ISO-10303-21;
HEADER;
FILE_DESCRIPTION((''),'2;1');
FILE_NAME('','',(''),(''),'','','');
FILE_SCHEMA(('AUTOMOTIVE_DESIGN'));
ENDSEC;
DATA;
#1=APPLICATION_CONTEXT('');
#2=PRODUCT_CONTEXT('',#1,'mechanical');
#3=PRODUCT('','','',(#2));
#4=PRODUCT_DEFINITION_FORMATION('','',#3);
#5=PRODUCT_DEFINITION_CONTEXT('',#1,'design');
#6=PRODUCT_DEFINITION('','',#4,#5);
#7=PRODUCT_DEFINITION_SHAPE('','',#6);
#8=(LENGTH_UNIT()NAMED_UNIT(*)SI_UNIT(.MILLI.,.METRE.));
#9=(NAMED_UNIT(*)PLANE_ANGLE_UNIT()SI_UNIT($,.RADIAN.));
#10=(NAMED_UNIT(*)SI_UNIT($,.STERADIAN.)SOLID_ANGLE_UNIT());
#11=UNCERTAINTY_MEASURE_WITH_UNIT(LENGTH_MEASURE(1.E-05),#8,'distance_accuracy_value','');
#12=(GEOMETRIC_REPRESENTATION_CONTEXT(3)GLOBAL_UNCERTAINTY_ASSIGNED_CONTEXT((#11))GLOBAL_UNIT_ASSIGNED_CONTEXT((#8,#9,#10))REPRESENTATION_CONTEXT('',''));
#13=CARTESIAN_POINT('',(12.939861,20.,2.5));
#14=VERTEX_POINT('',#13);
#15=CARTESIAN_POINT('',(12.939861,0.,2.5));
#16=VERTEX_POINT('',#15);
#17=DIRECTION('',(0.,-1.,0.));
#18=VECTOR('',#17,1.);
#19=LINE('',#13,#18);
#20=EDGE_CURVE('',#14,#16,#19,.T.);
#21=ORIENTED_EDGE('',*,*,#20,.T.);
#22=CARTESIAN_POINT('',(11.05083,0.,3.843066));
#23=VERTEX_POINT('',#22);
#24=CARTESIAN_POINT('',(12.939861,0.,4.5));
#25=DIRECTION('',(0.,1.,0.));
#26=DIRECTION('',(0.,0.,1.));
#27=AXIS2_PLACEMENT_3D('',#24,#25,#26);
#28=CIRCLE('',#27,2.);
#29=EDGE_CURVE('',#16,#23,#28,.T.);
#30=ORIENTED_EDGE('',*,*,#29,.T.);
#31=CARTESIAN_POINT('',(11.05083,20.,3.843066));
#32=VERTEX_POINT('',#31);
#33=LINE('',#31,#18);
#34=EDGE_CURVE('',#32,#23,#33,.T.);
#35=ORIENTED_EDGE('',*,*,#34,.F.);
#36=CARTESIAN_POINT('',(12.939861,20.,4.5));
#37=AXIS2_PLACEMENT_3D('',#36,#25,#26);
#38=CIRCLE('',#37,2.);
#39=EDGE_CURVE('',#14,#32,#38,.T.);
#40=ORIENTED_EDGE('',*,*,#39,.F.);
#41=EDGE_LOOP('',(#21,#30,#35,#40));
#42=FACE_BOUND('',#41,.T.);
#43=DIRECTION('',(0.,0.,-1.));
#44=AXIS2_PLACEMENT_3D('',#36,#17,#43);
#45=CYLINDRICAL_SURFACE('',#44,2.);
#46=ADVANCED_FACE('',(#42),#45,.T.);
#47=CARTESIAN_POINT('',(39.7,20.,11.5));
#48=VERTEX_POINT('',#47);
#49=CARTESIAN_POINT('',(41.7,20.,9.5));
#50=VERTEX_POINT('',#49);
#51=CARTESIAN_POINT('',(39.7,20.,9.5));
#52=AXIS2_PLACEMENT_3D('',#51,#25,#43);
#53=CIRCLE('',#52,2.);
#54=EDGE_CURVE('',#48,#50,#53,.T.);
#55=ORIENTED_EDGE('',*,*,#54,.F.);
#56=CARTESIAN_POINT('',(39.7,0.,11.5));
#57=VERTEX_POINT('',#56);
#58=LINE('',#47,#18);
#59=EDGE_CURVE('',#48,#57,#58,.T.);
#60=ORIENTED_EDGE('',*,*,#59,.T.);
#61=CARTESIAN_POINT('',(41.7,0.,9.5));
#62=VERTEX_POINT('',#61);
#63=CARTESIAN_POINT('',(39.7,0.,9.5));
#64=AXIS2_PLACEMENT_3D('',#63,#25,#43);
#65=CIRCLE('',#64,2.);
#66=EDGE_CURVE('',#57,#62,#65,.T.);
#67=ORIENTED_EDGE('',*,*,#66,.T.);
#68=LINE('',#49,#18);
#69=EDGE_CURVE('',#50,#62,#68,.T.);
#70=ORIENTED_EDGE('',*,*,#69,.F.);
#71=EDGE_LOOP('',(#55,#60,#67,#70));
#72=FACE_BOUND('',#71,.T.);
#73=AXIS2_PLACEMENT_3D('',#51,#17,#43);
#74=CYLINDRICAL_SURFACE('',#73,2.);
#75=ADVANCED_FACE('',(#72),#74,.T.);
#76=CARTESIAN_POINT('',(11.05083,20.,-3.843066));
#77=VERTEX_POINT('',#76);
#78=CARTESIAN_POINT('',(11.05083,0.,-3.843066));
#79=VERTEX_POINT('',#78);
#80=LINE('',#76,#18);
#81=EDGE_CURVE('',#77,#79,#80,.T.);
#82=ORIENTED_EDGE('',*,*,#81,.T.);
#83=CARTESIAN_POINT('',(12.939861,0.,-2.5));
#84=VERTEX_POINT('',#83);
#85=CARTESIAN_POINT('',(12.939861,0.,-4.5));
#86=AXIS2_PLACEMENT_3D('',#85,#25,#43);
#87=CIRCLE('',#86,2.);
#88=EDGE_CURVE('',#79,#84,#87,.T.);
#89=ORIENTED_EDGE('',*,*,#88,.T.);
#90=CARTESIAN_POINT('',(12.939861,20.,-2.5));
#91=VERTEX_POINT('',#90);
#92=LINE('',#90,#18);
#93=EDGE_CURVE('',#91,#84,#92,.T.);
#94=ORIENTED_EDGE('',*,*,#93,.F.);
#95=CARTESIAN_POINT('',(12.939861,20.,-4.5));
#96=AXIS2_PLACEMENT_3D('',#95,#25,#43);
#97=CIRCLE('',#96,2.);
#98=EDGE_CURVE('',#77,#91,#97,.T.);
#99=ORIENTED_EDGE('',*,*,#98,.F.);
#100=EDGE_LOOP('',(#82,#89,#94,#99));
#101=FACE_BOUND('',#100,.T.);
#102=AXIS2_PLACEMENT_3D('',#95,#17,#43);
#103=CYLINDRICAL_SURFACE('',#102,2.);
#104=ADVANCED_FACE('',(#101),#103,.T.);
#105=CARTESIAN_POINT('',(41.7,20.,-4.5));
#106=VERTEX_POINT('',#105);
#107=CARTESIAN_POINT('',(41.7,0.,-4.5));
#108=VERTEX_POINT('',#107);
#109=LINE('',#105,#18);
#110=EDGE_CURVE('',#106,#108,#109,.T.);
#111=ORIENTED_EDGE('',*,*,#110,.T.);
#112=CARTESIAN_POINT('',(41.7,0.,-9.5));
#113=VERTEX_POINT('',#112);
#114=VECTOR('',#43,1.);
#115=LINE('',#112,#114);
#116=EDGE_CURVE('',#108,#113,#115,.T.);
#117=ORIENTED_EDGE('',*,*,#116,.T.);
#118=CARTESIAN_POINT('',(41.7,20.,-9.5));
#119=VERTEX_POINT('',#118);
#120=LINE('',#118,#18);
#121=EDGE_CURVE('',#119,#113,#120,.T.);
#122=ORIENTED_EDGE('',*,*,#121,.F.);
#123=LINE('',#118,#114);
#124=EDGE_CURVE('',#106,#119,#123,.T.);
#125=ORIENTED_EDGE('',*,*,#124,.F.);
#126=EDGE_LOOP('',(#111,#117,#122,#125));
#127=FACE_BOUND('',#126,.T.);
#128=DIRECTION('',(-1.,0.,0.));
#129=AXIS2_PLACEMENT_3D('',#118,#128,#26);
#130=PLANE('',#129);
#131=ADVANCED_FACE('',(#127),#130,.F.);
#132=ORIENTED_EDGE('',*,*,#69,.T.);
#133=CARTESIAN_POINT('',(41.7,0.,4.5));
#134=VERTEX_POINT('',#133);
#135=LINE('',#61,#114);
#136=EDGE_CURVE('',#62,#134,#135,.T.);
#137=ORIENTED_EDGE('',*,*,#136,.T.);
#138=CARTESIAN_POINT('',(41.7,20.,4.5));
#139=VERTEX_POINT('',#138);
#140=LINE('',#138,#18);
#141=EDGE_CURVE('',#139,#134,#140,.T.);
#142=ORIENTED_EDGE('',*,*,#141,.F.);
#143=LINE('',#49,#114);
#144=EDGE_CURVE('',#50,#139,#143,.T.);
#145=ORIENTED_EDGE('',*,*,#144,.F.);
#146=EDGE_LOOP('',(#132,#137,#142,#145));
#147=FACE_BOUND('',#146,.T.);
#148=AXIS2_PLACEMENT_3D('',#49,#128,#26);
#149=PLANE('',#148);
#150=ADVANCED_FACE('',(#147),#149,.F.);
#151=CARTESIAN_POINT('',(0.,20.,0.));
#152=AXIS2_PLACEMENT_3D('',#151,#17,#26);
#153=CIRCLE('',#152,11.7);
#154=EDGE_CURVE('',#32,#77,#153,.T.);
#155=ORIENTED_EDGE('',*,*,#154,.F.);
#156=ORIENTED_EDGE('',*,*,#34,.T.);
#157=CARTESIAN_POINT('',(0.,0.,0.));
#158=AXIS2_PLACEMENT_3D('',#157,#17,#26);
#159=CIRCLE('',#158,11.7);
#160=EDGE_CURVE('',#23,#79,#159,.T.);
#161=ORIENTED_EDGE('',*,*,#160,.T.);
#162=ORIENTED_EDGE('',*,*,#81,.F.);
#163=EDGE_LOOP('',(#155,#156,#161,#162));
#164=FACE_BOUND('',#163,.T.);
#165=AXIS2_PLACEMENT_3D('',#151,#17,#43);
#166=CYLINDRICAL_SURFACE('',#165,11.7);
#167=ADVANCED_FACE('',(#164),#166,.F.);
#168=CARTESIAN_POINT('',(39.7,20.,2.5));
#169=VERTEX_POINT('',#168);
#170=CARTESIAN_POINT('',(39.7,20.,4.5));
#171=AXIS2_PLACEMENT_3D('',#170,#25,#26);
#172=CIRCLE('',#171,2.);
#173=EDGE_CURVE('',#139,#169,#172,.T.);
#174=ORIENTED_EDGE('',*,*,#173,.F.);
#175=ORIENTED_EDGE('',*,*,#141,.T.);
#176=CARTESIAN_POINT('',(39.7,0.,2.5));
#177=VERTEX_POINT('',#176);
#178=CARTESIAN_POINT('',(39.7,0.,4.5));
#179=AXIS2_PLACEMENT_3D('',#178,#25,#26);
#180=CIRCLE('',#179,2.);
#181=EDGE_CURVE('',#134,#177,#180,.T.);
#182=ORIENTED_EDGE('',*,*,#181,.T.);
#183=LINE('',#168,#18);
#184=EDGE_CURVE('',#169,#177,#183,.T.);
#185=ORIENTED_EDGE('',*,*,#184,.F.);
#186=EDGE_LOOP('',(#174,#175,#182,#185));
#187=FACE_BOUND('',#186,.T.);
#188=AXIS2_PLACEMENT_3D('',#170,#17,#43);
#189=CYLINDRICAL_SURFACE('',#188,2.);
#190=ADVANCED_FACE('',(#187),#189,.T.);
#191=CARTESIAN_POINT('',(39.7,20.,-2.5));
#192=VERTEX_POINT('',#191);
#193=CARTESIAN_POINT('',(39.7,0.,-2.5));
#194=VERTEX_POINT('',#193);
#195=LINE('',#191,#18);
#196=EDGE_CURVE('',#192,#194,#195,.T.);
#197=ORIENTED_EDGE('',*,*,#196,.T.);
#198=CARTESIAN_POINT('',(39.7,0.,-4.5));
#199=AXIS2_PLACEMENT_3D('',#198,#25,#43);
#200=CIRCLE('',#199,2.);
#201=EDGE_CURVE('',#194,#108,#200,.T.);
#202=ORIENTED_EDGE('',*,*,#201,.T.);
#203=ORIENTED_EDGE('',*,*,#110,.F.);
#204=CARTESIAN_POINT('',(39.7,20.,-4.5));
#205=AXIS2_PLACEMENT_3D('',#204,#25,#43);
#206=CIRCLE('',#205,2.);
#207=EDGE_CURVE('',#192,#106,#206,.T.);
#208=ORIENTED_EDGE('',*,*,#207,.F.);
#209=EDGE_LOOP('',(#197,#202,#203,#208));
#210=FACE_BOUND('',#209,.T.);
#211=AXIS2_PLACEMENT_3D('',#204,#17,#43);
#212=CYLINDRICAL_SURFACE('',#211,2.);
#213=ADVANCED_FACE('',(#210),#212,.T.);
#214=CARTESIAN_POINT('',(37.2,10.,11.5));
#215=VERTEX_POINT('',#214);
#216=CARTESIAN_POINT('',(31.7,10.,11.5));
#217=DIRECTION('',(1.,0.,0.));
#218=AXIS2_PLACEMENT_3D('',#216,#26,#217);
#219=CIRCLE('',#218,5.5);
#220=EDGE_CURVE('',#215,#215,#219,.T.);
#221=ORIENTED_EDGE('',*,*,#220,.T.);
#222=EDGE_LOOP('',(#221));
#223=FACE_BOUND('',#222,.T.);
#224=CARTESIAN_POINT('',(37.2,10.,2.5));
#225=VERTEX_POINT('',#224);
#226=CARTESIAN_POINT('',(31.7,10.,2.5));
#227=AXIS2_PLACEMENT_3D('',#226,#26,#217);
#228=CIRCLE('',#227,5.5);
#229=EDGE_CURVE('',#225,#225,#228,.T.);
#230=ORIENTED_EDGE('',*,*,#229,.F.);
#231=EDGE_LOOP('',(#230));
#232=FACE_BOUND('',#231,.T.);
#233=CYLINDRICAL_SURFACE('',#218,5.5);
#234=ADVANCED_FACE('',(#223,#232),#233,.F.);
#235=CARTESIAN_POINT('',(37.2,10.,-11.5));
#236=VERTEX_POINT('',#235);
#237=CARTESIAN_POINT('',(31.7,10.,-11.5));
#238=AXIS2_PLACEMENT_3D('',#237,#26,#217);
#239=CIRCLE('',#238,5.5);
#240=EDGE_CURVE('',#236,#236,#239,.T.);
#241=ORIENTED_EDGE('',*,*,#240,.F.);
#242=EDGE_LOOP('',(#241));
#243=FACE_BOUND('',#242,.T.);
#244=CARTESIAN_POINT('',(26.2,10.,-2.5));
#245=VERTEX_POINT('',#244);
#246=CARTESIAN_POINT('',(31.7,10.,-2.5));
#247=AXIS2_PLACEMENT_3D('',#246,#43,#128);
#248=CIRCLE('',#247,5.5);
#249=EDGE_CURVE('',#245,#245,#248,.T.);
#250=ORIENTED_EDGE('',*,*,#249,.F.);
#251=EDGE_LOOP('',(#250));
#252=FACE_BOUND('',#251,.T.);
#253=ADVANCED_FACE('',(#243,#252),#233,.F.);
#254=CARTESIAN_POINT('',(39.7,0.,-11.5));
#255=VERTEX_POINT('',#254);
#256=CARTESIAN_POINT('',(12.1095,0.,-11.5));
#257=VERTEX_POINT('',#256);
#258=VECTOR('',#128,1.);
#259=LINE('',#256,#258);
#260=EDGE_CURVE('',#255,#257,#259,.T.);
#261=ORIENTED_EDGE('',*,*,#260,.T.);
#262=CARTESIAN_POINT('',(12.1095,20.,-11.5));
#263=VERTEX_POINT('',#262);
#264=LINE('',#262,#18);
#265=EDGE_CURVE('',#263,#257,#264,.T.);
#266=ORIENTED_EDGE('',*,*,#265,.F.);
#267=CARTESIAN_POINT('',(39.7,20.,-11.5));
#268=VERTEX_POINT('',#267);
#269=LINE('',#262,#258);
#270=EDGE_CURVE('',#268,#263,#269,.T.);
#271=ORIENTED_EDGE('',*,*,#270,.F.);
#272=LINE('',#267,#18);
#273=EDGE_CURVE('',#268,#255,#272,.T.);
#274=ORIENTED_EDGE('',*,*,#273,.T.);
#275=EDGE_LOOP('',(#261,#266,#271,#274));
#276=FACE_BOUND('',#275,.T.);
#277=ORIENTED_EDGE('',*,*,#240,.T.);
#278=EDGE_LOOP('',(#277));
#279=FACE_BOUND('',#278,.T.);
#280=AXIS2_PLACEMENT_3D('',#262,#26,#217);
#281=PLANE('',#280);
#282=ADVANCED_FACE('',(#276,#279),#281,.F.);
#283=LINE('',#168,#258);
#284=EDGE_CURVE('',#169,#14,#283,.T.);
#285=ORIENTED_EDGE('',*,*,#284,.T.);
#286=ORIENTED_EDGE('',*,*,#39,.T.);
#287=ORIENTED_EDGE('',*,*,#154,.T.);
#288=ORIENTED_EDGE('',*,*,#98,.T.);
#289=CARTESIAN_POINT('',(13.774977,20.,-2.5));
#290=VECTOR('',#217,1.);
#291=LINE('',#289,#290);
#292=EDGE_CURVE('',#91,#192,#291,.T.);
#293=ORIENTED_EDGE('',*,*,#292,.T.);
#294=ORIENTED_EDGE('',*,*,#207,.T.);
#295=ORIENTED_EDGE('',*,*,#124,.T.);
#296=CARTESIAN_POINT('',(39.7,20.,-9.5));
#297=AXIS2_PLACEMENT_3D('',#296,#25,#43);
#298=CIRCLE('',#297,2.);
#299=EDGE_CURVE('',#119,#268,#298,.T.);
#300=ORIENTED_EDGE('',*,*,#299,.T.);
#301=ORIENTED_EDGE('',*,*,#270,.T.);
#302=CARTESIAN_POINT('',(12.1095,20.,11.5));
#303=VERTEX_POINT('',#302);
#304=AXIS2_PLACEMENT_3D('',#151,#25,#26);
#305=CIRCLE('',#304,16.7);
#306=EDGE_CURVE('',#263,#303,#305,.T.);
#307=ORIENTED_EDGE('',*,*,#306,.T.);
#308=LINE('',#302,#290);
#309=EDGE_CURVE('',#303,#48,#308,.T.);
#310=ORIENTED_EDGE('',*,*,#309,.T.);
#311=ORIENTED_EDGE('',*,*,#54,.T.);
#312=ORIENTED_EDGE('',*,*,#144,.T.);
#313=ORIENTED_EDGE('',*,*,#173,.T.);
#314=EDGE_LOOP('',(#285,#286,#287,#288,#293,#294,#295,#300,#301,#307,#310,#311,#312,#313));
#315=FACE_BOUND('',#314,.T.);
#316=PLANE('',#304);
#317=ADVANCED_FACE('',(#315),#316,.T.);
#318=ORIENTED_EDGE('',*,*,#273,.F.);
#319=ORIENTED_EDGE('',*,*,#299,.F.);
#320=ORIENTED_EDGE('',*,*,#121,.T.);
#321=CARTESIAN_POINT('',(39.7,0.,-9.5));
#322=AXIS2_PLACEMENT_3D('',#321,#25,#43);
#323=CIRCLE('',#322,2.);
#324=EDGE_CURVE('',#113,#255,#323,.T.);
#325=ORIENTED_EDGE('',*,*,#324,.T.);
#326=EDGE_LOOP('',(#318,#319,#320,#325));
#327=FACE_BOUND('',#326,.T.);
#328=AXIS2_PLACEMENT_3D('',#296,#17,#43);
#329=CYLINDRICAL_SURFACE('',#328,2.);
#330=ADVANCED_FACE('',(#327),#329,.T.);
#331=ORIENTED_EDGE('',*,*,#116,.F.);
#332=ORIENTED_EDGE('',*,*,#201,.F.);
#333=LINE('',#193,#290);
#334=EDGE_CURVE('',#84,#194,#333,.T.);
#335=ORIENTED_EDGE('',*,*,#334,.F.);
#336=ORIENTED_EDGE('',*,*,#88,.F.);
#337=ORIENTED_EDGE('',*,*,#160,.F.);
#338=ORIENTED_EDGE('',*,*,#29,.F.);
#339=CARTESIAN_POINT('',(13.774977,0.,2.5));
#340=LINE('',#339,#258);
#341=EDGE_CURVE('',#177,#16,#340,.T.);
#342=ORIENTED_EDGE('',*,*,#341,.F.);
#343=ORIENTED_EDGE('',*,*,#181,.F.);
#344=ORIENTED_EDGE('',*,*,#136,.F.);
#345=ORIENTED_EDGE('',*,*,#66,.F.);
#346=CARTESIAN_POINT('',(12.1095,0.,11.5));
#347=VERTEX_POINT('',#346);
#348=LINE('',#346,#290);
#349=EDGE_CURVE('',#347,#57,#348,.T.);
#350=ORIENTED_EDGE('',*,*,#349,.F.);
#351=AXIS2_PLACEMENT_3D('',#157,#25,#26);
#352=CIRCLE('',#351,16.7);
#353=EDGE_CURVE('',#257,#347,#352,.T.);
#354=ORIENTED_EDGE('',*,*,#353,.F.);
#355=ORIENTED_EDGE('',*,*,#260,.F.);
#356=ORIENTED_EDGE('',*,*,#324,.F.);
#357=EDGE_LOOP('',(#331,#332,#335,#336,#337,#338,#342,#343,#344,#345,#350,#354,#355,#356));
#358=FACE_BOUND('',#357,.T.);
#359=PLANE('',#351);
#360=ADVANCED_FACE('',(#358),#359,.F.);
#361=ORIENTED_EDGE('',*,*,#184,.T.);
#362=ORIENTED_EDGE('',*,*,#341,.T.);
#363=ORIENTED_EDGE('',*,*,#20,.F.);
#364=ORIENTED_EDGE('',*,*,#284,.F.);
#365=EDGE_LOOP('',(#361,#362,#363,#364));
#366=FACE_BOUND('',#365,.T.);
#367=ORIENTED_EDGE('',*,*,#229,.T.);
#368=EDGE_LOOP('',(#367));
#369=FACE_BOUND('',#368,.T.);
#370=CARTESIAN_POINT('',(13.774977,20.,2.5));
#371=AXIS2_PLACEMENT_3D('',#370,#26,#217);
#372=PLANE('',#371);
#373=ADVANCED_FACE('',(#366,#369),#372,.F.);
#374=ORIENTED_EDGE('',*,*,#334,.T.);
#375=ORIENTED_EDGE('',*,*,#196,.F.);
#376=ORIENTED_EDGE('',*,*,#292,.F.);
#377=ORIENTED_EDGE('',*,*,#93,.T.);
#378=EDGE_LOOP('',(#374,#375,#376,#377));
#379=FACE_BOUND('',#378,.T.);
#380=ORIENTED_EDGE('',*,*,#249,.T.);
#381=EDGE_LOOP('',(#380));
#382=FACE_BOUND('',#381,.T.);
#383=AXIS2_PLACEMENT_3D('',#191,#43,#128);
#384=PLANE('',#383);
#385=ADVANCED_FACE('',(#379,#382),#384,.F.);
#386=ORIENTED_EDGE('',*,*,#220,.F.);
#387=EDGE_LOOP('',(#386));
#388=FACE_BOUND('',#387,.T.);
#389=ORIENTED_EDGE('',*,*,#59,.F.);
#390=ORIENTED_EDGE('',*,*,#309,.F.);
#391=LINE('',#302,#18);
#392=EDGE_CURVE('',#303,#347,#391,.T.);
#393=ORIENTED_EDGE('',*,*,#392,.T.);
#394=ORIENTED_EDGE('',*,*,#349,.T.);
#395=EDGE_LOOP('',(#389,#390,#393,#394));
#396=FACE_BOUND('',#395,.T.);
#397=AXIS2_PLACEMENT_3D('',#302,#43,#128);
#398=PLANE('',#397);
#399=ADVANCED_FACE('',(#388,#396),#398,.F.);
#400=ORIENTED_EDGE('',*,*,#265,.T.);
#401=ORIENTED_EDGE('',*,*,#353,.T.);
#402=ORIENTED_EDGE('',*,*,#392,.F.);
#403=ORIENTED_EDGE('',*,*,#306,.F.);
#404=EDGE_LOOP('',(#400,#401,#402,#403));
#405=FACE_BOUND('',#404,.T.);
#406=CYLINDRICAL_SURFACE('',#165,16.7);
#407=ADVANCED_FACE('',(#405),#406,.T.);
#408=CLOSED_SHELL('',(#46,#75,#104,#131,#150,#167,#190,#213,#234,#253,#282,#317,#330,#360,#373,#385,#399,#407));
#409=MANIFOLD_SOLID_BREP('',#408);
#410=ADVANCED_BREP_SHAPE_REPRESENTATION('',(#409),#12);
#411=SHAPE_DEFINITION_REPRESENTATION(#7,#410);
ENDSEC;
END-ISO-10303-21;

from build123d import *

# Parameters (mm, degrees)
DODANIE_WYCI_GNI_CIE1_DEPTH  = 20
ZAAWANSOWANYOTW_R1_START     = -11.5
ZAAWANSOWANYOTW_R1_OUTLINE_R = 5.5
ZAAWANSOWANYOTW_R1_DEPTH     = 23


# Read off the part's stored shape, not the designer's step: ZaawansowanyOtwór1
with BuildPart() as part:
    # Szkic1 → Dodanie-wyciągnięcie1 (new body)
    with BuildSketch(Plane(origin=(0, 0, 0), x_dir=(1, 0, 0), z_dir=(0, 1, 0))):
        with BuildLine():
            Line((12.109500403, 11.5), (39.7, 11.5))
            ThreePointArc((39.7, 11.5), (41.114213562, 10.914213562), (41.7, 9.5))
            Line((41.7, 9.5), (41.7, 4.5))
            ThreePointArc((41.7, 4.5), (41.114213562, 3.085786438), (39.7, 2.5))
            Line((39.7, 2.5), (13.774977314, 2.5))
            Line((13.774977314, 2.5), (12.939860896, 2.5))
            ThreePointArc((12.939860896, 2.5), (11.780953784, 2.869989477), (11.050830108, 3.843065693))
            ThreePointArc((11.050830108, 3.843065693), (-11.7, 0), (11.050830108, -3.843065693))
            ThreePointArc((11.050830108, -3.843065693), (11.780953784, -2.869989477), (12.939860896, -2.5))
            Line((12.939860896, -2.5), (13.774977314, -2.5))
            Line((13.774977314, -2.5), (39.7, -2.5))
            ThreePointArc((39.7, -2.5), (41.114213562, -3.085786438), (41.7, -4.5))
            Line((41.7, -4.5), (41.7, -9.5))
            ThreePointArc((41.7, -9.5), (41.114213562, -10.914213562), (39.7, -11.5))
            Line((39.7, -11.5), (12.109500403, -11.5))
            ThreePointArc((12.109500403, -11.5), (-16.7, 0), (12.109500403, 11.5))
        make_face()
    extrude(amount=DODANIE_WYCI_GNI_CIE1_DEPTH)

    # ZaawansowanyOtwór1 outline → ZaawansowanyOtwór1 (cut)
    with BuildSketch(Plane.XY.offset(ZAAWANSOWANYOTW_R1_START)):
        with Locations((31.7, 10)):
            Circle(ZAAWANSOWANYOTW_R1_OUTLINE_R)
    extrude(amount=ZAAWANSOWANYOTW_R1_DEPTH, mode=Mode.SUBTRACT)


solid = part.part
